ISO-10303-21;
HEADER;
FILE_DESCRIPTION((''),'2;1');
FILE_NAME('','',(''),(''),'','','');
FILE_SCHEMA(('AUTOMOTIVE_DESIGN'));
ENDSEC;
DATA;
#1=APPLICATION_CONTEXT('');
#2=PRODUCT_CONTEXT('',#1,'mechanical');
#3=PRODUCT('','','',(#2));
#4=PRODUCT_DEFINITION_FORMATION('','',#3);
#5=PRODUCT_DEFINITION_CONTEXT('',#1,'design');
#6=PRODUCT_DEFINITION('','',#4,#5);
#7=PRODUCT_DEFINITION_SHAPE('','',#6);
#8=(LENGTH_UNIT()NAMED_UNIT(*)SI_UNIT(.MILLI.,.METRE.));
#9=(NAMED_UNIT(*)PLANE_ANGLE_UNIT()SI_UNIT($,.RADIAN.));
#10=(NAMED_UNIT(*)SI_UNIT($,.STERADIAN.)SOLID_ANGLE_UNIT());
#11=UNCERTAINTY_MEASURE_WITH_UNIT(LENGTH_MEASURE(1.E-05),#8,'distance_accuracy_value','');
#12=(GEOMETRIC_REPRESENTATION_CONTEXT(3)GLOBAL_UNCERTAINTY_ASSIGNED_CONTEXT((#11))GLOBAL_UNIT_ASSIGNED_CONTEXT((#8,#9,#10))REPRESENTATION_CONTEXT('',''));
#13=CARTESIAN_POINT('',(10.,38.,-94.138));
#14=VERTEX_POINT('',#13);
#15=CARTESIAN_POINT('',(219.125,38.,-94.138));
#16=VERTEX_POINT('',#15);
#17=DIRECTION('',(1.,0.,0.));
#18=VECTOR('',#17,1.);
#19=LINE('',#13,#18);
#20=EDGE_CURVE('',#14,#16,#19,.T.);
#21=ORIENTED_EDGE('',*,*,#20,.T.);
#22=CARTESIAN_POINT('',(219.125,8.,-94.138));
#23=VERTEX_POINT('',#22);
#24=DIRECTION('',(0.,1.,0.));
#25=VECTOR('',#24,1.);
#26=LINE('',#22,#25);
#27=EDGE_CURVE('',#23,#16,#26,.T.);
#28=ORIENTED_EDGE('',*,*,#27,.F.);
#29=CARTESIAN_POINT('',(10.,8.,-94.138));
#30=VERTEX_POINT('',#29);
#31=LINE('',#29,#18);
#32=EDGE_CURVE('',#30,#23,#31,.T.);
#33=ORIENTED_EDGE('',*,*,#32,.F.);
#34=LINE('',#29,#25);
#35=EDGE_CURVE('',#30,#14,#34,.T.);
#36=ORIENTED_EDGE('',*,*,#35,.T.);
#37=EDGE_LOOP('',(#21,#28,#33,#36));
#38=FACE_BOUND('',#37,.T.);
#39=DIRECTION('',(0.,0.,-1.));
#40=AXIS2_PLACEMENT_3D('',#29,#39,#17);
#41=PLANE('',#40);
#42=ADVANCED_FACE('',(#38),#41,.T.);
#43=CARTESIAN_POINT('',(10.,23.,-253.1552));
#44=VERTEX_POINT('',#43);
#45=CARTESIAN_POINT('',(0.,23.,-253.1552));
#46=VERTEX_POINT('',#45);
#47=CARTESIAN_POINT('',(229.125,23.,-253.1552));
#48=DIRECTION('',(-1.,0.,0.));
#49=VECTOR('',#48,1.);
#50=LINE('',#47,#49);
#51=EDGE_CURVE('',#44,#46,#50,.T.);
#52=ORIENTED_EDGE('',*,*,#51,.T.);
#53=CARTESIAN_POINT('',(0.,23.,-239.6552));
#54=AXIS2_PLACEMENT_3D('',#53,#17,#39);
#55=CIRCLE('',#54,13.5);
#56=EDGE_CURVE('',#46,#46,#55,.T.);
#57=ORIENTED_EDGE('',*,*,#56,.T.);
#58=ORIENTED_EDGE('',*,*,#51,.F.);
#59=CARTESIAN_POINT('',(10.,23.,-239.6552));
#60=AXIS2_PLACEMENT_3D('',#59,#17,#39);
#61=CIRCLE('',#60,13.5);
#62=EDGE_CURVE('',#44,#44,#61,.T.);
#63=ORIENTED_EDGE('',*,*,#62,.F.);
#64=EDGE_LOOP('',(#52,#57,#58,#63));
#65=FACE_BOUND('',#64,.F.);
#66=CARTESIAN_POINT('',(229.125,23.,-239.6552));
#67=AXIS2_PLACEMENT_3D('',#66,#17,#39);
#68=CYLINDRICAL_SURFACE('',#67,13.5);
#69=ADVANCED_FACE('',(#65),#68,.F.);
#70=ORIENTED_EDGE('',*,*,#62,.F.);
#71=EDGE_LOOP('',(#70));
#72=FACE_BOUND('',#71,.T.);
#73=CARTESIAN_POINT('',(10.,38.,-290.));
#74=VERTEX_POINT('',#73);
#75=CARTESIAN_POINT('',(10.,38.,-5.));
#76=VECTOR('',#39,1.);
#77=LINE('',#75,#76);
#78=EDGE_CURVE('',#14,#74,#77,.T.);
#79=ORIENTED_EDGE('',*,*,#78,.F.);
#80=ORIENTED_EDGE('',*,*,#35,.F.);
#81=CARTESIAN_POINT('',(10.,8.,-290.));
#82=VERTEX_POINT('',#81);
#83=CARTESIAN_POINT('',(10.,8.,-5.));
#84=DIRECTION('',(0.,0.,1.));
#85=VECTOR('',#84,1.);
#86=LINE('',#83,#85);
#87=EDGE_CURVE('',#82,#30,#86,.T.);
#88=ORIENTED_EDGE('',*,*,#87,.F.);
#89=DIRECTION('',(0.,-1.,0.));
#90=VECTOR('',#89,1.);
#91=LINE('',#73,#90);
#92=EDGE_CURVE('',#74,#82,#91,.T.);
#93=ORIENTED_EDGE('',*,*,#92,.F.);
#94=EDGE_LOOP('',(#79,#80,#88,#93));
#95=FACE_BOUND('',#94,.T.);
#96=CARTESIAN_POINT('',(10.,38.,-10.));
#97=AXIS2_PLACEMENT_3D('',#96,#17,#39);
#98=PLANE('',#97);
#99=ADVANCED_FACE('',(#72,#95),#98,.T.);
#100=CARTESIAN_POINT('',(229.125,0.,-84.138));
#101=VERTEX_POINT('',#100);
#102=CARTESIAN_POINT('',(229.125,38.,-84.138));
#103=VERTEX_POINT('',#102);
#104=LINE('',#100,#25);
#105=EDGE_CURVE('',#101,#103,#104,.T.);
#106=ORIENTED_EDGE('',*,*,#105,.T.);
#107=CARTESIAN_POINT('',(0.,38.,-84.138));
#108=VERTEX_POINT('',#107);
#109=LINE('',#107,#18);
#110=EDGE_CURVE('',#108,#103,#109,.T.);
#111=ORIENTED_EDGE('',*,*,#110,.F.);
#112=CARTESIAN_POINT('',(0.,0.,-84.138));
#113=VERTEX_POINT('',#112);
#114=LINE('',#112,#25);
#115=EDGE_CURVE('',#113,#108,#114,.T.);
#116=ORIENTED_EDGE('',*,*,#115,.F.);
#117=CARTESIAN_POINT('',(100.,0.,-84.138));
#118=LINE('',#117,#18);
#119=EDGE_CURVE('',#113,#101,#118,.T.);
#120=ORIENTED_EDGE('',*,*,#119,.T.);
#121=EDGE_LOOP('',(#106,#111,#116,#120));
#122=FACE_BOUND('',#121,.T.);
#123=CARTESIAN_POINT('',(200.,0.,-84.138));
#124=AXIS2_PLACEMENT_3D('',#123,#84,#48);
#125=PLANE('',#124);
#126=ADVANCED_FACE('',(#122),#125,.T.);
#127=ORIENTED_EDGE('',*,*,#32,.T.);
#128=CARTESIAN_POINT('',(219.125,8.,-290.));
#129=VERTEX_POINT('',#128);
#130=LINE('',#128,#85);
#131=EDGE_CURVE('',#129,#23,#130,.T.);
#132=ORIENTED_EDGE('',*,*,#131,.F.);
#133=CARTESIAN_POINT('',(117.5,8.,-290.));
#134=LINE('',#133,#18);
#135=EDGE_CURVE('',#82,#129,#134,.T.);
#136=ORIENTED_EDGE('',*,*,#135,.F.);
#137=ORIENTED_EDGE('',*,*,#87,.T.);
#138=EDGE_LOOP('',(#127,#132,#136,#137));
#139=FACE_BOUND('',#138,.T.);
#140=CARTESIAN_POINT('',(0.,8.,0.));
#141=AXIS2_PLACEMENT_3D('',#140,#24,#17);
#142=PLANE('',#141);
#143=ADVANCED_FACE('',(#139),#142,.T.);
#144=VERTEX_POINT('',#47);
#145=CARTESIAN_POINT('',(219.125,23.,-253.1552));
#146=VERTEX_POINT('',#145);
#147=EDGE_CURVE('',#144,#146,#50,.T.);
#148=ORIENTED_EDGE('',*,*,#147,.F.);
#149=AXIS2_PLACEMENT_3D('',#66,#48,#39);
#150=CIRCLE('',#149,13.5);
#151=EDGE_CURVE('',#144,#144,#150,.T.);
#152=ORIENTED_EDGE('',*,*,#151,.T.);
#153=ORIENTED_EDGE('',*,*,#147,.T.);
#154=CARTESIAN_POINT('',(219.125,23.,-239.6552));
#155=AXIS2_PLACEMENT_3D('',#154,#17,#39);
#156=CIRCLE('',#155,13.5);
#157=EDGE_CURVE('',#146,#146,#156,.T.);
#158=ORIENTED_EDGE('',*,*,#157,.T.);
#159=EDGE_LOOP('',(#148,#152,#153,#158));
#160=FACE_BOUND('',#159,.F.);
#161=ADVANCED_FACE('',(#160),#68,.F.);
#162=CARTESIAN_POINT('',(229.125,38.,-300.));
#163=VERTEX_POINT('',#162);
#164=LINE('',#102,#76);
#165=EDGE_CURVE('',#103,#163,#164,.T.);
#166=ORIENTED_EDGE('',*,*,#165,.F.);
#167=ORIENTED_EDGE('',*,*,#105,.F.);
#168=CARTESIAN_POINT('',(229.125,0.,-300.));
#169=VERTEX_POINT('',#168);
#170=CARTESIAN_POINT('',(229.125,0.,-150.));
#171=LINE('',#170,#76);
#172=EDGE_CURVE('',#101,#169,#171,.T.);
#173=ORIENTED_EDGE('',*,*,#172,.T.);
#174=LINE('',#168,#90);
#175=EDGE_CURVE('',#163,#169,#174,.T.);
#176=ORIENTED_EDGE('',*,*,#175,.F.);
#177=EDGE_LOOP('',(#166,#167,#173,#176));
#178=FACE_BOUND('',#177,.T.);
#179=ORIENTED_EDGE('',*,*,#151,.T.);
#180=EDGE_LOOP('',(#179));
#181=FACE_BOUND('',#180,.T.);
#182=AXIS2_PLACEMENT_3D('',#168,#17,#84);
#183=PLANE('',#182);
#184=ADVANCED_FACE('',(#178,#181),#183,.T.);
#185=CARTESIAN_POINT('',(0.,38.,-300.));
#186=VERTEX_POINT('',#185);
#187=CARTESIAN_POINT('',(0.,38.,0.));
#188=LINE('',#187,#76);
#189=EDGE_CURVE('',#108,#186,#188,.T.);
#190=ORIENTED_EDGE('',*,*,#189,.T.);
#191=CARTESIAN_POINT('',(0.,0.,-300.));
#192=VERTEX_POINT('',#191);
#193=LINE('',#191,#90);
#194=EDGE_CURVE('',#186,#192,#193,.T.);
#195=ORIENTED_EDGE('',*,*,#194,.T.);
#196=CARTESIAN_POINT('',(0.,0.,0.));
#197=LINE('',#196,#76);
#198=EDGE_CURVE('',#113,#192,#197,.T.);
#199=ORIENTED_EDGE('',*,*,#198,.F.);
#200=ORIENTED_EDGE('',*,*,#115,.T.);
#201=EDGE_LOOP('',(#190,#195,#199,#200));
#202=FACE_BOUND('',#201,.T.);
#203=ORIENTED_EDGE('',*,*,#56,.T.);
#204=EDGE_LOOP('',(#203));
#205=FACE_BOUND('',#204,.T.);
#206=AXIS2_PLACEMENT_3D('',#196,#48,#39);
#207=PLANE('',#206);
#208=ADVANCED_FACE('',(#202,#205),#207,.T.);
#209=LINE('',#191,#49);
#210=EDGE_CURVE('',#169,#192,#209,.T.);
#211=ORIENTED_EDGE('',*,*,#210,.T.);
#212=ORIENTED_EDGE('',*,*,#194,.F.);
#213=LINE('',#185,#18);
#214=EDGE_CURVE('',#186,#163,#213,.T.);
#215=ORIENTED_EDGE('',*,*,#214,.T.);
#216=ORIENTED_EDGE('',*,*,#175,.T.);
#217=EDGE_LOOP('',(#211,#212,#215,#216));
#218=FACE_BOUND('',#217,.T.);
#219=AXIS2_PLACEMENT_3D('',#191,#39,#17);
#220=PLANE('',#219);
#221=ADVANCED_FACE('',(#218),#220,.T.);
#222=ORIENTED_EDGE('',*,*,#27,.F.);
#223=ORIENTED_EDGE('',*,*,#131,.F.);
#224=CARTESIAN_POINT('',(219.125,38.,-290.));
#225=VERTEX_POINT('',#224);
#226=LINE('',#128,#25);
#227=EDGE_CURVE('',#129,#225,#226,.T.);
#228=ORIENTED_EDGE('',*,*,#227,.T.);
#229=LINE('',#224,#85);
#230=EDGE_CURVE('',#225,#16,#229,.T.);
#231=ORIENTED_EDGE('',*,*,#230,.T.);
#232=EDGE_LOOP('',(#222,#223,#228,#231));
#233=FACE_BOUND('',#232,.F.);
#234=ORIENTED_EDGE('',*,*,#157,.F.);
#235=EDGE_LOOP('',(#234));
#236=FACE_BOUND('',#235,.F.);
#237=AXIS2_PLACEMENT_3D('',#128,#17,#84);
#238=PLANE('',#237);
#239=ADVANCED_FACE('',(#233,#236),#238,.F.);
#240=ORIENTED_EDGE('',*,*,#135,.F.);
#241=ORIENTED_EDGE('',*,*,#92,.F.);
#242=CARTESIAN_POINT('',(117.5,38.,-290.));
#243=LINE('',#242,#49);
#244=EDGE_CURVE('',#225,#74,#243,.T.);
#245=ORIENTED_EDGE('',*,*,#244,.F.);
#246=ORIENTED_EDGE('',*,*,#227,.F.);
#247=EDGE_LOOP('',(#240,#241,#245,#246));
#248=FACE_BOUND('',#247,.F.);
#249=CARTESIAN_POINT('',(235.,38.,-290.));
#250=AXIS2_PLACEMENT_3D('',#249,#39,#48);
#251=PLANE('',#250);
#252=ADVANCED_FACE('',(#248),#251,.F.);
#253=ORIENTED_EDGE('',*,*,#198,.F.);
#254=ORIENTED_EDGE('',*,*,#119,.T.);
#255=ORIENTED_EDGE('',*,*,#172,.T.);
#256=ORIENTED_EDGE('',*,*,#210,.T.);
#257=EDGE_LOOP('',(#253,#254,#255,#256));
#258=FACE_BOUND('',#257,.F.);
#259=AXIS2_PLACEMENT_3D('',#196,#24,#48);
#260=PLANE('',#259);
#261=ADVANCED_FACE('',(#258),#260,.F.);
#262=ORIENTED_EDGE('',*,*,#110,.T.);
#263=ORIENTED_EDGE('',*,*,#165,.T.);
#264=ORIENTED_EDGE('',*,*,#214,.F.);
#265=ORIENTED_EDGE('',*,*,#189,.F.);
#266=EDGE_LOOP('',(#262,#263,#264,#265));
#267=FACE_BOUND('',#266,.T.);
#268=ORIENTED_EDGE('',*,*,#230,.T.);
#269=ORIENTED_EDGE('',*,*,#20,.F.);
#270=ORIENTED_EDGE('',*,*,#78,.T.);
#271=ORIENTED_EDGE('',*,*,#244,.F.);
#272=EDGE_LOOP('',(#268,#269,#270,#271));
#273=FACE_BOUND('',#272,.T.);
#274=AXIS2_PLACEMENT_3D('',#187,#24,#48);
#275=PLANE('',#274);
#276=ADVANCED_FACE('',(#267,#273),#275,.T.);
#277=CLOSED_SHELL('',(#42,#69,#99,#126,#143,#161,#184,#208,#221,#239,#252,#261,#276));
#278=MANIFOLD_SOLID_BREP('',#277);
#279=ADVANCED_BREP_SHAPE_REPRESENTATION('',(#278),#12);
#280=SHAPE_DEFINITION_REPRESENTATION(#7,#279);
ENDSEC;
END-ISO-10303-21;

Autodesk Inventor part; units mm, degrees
ref_plane "YZ Plane" through (0, 0, 0) normal (1, 0, 0) x (0, 1, 0)
ref_plane "XZ Plane" through (0, 0, 0) normal (0, 1, 0) x (-1, 0, 0)
ref_plane "XY Plane" through (0, 0, 0) normal (0, 0, 1) x (1, 0, 0)
sketch "Sketch1" plane through (0, 0, 0) normal (0, 1, 0) x (-1, 0, 0)
  line L0 (0, 0) -> (0, -250)
  line L1 (-200, 0) -> (0, 0)
  line L2 (0, -250) -> (0, -300)
  line L3 (0, -300) -> (-200, -300)
  line L4 (-200, -300) -> (-230, -300)
  line L5 (-230, 0) -> (-200, 0)
  line L6 (-230, -300) -> (-245, -300)
  line L7 (-245, -300) -> (-245, 0)
  line L8 (-245, 0) -> (-230, 0)
  dimension "d0" = 250
  dimension "d4" = 50
  dimension "d12" = 30
  dimension "d24" = 15
extrude "Extrusion1" add sketch "Sketch1" along normal blind 38
sketch "Sketch2" plane through (0, 38, 0) normal (0, 1, 0) x (1, 0, 0)
  line L0 (0, 300) -> (0, 0) projected
  line L1 (0, 0) -> (245, 0) projected
  line L2 (10, 10) -> (10, 290)
  line L3 (245, 300) -> (0, 300) projected
  line L4 (245, 0) -> (245, 300) projected
  line L5 (245, 290) -> (235, 290)
  line L6 (235, 290) -> (235, 10)
  line L7 (235, 290) -> (10, 290)
  line L8 (0, 300) -> (0, 0) projected
  line L9 (235, 10) -> (10, 10)
  dimension "d25" = 10
extrude "Extrusion2" cut sketch "Sketch2" against normal blind 30 contours L2 L7 L6 L9
move faces "Move1" translate (0, 0, -84.138) faces at (81.6667, 25.3333, 0)
move faces "Move2" translate (-15.875, 0, 0) faces at (245, 25.3333, -156.092)
sketch "Sketch15" plane through (0, 8, 0) normal (0, 1, 0) x (1, 0, 0)
  line L0 (10, 84.138) -> (10, 290) projected
  line L1 (10, 84.138) -> (10, 94.138)
  line L2 (10, 94.138) -> (219.125, 94.138)
  line L3 (229.125, 290) -> (229.125, 84.138) projected
  line L4 (229.125, 290) -> (219.125, 290)
  line L5 (10, 290) -> (229.125, 290) projected
  line L6 (219.125, 290) -> (219.125, 94.138)
  line L7 (10, 84.138) -> (229.125, 84.138)
  line L8 (229.125, 290) -> (229.125, 84.138)
  point P0 (0, 0)
  dimension "d42" = 10
  dimension "d43" = 10
extrude "Extrusion5" add sketch "Sketch15" along normal blind 30 contours L0 L2 L6 L4 L3 L7
sketch "Sketch16" plane through (229.125, 0, -84.138) normal (1, 0, 0) x (0, 0, -1)
  line L0 (10, 8) -> (205.862, 8) projected
  line L1 (155.5172, 8) -> (155.5172, 38)
  line L2 (215.862, 38) -> (0, 38) projected
  circle A0 centre (155.5172, 23) radius 13.5
  point P0 (-84.138, 0)
  dimension "d46" = 27
extrude "Extrusion6" cut sketch "Sketch16" against normal blind 235
equation "\"BendRadius\" = Thickness"
equation "\"BendReliefWidth\" = Thickness"
equation "\"BendReliefDepth\" = 0.5 * Thickness"
equation "\"CornerReliefSize\" = 4 * Thickness"
equation "\"MinimumRemnant\" = 2 * Thickness"
equation "\"TransitionRadius\" = BendRadius"
equation "\"JacobiRadiusSize\" = BendRadius"
equation "\"GapSize\" = Thickness"
equation "\"Thickness\" = 3.048"
properties part number "Case_3d_model_3DPrint"
